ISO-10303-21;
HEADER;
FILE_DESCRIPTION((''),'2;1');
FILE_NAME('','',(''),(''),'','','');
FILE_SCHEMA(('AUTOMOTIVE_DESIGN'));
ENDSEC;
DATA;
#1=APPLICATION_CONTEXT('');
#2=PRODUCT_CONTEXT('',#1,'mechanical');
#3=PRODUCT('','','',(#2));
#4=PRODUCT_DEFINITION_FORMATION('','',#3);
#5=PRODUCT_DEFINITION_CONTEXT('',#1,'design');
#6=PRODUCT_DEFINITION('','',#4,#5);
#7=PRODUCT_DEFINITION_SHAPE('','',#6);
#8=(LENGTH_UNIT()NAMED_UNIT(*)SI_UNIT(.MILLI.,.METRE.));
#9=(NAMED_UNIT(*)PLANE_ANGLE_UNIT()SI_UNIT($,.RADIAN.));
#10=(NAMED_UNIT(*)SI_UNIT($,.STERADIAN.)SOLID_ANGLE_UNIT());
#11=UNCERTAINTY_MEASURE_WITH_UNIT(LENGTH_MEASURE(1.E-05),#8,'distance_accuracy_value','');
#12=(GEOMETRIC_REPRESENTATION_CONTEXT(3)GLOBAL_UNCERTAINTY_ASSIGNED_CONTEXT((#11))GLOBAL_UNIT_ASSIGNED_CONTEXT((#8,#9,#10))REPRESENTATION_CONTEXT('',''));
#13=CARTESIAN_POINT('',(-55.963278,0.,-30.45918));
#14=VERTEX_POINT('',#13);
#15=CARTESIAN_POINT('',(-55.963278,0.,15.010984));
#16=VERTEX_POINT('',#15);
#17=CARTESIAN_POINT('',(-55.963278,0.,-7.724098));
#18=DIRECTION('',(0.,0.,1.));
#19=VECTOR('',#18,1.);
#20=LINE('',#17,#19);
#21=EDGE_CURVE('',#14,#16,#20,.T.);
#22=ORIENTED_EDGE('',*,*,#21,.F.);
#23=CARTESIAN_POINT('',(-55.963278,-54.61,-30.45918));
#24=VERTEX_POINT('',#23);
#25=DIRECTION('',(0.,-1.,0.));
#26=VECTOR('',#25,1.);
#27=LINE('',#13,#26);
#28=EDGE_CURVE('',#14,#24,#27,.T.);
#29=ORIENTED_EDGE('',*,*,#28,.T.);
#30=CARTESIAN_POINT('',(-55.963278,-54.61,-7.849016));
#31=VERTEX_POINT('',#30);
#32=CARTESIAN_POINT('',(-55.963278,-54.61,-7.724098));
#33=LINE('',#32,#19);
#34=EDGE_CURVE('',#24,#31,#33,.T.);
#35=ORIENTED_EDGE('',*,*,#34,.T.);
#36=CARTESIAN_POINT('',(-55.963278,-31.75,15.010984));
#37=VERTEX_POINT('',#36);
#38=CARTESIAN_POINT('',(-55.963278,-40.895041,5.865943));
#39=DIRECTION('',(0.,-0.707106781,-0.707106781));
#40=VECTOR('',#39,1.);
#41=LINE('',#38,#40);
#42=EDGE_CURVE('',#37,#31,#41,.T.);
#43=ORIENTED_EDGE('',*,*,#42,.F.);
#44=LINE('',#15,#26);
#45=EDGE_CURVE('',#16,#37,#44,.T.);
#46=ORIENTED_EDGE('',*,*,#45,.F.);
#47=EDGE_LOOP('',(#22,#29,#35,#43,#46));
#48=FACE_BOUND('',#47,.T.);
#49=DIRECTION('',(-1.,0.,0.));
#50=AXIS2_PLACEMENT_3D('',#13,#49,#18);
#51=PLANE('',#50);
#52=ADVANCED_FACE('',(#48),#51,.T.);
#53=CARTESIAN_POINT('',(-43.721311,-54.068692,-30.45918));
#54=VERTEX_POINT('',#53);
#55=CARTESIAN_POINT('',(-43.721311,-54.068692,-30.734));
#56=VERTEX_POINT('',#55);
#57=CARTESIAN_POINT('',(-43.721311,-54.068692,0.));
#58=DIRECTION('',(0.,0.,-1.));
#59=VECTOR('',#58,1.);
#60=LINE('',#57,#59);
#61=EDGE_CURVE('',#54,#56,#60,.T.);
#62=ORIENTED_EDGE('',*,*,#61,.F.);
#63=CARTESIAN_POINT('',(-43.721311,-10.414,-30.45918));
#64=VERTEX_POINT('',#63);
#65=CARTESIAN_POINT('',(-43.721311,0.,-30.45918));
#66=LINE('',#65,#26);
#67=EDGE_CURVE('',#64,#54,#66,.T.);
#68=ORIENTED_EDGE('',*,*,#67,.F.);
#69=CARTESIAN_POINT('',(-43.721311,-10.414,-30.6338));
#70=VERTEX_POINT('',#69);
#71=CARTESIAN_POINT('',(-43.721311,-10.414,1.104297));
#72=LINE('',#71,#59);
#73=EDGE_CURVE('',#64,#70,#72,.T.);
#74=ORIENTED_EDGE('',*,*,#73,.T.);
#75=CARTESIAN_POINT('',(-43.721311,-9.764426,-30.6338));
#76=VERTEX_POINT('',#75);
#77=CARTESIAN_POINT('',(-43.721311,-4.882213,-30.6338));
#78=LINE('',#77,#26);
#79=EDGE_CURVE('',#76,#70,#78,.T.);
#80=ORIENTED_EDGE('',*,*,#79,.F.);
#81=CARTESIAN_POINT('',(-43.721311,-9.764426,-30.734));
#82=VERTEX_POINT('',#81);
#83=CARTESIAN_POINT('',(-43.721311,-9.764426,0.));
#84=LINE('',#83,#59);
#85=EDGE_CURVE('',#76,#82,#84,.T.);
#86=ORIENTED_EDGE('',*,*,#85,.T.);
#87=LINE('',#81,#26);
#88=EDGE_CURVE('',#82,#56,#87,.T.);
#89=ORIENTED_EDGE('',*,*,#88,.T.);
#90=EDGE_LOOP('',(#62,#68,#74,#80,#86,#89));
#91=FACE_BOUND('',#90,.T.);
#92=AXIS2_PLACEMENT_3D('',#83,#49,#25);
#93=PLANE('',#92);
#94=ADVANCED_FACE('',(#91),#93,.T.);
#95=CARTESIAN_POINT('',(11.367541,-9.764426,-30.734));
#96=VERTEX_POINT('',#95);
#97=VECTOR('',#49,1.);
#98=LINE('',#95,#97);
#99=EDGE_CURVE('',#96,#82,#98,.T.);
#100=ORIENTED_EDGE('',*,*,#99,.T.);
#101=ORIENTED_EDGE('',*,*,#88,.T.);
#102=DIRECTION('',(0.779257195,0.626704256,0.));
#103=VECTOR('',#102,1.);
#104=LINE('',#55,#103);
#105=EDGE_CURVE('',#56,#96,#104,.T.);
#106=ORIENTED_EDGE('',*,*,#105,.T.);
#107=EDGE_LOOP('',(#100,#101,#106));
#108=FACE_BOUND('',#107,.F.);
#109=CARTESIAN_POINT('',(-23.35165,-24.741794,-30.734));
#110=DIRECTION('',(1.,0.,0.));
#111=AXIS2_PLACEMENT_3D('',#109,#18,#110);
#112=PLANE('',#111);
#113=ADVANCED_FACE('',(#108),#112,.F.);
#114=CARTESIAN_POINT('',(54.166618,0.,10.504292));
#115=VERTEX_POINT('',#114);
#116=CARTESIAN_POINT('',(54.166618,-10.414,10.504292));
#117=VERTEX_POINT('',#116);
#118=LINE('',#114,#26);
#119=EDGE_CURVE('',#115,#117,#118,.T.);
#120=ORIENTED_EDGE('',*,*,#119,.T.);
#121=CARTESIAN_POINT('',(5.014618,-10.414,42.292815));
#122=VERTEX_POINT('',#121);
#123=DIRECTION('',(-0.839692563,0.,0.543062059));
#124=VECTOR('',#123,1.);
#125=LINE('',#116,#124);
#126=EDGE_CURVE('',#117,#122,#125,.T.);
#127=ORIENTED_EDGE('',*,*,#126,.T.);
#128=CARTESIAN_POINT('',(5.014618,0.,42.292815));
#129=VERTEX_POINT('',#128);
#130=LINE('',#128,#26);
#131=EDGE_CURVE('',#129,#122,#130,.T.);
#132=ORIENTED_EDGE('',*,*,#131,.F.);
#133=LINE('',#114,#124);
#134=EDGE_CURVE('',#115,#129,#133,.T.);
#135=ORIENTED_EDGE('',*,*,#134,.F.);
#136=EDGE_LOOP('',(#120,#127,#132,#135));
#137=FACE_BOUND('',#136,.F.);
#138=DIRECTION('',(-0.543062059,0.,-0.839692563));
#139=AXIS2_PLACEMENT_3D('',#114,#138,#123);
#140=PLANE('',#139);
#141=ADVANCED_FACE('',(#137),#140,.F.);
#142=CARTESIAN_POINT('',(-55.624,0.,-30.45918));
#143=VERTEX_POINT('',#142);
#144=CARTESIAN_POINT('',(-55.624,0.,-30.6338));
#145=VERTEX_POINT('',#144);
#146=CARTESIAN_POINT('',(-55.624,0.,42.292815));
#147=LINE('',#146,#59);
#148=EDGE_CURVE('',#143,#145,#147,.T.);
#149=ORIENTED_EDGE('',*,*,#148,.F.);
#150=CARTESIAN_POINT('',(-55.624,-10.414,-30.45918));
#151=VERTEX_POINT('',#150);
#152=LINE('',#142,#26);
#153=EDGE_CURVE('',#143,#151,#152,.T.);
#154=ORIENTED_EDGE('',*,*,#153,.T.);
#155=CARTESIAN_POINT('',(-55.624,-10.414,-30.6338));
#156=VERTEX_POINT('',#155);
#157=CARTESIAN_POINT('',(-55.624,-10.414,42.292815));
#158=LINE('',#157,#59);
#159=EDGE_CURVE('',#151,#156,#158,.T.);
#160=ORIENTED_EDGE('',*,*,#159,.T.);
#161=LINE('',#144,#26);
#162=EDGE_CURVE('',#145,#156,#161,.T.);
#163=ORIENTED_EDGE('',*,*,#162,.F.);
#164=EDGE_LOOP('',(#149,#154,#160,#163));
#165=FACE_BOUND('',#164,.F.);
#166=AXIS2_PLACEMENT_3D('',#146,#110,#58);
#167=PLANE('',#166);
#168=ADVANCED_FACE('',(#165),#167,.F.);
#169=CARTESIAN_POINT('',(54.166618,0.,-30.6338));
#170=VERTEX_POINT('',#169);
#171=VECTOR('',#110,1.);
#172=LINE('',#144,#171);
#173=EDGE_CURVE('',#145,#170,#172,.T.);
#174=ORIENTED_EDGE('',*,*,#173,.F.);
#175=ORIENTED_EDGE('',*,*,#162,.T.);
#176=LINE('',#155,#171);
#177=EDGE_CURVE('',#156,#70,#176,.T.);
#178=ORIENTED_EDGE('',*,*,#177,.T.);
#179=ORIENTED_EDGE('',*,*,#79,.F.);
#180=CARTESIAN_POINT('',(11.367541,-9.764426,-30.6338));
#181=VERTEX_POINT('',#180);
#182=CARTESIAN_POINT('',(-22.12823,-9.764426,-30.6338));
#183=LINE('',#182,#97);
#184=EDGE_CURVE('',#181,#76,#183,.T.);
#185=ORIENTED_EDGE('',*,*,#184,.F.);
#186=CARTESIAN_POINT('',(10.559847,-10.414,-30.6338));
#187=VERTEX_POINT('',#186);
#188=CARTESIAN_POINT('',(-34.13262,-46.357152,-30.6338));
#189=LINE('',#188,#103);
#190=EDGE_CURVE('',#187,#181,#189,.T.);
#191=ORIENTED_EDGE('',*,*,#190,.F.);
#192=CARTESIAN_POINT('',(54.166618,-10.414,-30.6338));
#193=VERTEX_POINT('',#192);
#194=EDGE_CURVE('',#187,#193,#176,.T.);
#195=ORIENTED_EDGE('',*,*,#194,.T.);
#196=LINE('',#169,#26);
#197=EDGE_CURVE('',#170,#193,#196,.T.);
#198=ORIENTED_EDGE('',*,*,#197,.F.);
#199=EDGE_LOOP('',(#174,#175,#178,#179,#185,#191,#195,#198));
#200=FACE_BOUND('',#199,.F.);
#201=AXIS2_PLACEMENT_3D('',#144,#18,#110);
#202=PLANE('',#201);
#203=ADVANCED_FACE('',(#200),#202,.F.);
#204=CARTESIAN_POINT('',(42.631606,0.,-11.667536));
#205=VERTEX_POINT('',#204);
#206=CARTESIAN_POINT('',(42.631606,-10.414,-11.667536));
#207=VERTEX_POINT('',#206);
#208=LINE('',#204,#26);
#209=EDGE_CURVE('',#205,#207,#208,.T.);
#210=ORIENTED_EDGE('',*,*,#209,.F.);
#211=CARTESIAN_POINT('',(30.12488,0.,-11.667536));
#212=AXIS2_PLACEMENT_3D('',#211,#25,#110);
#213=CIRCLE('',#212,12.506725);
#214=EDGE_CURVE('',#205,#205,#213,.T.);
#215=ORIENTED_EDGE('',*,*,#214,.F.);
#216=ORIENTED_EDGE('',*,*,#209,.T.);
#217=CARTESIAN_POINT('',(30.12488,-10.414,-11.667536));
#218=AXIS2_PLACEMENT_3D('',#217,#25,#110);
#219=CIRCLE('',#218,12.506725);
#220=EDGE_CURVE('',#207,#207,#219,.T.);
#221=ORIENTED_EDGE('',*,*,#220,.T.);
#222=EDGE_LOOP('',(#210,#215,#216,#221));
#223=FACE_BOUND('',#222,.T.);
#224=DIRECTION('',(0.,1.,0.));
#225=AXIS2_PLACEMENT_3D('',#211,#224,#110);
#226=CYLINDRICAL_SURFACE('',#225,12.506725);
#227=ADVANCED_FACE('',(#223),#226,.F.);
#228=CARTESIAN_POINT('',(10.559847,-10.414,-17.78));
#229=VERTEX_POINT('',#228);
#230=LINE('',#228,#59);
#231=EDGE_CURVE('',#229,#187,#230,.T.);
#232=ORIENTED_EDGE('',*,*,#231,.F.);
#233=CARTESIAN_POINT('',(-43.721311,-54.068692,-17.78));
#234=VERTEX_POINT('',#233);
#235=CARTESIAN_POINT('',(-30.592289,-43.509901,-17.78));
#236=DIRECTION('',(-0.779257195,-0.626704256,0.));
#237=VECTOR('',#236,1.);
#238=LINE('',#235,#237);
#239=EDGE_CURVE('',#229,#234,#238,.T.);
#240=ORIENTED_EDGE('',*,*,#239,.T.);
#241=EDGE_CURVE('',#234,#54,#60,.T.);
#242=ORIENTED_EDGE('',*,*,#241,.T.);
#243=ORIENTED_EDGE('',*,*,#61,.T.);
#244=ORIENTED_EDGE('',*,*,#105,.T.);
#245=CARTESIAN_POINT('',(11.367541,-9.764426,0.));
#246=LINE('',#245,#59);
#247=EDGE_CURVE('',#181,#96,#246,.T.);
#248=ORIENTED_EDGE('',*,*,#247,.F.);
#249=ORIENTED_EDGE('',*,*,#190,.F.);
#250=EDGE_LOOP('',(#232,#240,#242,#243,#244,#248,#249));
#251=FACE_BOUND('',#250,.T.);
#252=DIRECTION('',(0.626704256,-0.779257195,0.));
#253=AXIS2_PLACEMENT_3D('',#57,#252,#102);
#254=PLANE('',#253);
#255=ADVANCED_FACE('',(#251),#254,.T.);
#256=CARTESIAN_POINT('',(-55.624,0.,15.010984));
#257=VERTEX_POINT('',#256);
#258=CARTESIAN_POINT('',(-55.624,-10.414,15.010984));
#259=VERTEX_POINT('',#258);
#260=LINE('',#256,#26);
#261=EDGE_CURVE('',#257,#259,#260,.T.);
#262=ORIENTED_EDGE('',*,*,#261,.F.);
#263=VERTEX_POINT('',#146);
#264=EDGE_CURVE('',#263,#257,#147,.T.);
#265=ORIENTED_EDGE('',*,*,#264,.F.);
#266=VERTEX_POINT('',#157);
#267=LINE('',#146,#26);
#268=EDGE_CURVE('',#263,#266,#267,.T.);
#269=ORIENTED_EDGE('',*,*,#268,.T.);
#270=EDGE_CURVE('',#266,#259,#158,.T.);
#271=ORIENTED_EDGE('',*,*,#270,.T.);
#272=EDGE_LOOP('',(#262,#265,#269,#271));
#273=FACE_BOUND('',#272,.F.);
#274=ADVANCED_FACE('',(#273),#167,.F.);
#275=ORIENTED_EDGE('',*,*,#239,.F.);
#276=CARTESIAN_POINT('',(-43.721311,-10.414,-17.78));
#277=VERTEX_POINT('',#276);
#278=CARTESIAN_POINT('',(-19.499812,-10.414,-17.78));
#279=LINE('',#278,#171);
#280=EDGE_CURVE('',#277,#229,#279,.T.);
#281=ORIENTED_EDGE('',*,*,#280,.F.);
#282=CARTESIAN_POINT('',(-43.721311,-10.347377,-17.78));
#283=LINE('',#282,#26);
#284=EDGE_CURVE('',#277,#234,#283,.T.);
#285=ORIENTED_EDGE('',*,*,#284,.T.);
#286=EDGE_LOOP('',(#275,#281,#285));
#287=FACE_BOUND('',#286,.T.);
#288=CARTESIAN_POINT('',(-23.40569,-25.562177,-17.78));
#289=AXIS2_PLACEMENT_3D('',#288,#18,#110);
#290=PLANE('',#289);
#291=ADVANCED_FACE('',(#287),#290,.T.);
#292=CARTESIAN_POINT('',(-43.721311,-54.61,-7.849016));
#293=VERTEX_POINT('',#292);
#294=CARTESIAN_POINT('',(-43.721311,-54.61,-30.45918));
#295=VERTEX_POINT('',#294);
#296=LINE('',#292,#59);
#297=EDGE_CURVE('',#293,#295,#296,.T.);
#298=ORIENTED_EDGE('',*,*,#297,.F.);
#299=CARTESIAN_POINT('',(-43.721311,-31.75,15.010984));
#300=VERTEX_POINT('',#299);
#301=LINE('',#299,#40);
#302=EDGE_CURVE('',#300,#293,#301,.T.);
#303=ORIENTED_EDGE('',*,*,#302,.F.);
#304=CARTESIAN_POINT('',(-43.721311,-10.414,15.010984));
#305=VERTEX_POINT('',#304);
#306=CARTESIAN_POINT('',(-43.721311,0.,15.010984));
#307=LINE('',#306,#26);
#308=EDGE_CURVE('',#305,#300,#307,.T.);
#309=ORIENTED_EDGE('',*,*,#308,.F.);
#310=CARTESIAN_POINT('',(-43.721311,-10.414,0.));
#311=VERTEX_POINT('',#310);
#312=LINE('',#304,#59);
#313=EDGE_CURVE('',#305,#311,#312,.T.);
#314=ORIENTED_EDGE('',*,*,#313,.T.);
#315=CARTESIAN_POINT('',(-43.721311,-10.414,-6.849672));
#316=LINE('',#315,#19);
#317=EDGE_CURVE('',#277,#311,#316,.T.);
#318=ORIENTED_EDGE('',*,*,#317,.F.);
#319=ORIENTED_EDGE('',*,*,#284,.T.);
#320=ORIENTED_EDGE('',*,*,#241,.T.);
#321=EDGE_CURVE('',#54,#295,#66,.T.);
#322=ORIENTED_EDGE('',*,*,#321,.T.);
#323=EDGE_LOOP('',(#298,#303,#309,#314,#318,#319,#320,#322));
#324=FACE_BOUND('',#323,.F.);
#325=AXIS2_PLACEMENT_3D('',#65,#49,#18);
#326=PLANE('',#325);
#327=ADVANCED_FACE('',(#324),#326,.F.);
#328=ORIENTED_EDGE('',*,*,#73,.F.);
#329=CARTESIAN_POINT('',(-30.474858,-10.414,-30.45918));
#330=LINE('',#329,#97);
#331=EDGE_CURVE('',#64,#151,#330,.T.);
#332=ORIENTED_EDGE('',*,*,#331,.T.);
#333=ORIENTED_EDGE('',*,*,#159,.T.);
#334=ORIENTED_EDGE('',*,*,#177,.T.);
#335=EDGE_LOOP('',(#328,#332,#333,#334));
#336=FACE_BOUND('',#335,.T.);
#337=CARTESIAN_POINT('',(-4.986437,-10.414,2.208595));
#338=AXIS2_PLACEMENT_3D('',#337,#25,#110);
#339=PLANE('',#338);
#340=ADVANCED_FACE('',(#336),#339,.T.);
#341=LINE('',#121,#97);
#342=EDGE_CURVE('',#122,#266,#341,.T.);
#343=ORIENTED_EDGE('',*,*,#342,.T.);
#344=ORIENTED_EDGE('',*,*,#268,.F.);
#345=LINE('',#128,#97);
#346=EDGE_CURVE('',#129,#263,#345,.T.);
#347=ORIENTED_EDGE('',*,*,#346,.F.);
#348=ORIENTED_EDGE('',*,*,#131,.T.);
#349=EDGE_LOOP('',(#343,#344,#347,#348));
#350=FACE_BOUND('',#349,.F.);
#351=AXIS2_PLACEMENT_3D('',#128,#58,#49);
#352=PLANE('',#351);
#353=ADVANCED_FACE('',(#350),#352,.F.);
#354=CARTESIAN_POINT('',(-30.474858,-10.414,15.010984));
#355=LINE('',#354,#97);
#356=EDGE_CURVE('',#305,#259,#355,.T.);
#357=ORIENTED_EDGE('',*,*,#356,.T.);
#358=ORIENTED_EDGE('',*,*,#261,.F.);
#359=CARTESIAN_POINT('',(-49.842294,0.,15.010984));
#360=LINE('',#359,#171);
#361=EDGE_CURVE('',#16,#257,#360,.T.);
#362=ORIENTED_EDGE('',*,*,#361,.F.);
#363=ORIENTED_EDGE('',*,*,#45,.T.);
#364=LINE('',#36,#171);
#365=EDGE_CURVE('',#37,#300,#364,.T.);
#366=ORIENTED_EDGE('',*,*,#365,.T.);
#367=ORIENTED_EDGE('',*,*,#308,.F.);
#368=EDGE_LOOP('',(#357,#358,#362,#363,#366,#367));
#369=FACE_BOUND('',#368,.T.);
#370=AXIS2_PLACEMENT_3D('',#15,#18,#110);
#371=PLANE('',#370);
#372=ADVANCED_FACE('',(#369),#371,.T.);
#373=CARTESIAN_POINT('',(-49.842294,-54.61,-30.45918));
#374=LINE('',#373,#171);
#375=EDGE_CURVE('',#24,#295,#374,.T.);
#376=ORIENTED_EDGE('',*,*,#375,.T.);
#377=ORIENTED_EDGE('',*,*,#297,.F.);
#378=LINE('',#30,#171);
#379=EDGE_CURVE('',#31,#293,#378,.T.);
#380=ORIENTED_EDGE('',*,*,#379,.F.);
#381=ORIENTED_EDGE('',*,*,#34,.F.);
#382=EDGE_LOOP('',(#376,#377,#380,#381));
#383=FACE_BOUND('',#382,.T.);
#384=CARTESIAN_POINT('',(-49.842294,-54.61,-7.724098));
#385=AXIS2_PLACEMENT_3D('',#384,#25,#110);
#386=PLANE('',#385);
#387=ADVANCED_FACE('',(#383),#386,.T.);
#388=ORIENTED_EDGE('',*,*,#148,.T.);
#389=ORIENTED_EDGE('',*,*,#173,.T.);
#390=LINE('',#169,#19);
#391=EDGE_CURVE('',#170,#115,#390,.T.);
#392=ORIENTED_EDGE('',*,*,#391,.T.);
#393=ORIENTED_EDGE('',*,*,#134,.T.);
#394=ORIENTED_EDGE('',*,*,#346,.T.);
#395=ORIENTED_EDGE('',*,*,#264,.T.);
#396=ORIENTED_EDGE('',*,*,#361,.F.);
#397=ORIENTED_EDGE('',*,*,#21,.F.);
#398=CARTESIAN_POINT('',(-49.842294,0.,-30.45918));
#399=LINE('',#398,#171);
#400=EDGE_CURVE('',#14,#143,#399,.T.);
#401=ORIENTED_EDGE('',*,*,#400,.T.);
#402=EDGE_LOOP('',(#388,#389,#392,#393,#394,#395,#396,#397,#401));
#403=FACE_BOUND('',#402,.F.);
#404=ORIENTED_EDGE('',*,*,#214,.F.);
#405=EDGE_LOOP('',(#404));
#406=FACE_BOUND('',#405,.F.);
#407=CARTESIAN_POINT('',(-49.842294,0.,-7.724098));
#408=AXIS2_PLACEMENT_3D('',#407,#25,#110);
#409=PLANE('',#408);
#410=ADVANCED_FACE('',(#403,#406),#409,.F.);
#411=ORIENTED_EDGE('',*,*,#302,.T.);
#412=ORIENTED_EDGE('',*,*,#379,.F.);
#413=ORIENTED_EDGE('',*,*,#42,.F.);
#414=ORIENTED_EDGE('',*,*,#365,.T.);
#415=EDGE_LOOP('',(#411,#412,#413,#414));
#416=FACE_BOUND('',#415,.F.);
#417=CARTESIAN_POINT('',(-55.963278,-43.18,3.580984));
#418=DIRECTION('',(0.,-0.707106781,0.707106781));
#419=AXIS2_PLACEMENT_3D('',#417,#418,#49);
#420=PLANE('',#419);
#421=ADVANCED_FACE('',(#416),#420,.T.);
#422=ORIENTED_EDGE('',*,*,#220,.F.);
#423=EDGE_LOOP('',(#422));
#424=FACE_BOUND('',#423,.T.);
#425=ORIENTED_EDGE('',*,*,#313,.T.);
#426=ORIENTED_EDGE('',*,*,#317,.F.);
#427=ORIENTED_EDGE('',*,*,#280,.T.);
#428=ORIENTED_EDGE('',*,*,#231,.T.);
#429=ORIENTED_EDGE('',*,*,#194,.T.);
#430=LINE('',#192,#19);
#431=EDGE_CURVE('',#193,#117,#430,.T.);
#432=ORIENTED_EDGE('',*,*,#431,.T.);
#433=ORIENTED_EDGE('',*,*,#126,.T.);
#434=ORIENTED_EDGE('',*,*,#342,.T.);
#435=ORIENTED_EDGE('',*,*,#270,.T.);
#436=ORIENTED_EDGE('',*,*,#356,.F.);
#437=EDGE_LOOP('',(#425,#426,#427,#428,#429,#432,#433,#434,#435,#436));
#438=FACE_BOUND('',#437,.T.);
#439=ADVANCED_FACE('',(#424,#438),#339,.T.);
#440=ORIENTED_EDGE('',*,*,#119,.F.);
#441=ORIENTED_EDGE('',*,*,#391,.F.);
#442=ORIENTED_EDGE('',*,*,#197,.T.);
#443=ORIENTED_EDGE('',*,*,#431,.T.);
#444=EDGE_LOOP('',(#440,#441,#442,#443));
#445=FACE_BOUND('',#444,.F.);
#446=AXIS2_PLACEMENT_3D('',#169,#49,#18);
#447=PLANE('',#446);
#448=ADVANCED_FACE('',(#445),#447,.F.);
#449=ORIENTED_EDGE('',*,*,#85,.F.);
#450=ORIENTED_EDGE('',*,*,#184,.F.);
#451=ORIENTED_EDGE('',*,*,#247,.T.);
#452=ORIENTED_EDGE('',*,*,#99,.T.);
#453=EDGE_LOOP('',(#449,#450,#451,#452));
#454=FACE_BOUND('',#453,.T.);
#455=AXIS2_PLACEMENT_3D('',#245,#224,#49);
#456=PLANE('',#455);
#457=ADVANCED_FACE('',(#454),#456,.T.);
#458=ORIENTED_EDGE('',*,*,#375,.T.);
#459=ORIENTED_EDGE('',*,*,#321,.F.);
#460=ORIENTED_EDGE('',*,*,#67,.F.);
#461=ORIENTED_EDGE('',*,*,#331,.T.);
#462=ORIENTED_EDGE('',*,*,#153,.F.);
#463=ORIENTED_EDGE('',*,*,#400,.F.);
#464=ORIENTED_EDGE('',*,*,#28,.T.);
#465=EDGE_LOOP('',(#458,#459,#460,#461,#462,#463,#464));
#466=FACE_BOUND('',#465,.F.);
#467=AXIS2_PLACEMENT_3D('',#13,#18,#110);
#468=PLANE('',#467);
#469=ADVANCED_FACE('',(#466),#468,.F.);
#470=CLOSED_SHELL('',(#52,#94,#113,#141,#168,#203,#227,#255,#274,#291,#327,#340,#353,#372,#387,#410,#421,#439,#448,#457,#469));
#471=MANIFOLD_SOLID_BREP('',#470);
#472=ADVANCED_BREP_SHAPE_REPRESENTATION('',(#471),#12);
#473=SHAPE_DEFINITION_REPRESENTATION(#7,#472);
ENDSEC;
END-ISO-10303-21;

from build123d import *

# Parameters (mm, degrees)
F0_R      = 12.5067254218
F1_DEPTH  = 10.414
F2_W      = 12.2419670224
F2_H      = 45.4701641575
F3_DEPTH  = 54.61
F4_SIZE   = 22.86
F6_DEPTH  = 30.734
F8_DEPTH  = 17.78
F9_W      = 56.2547529116
F9_H      = 22.1521309577
F10_DEPTH = 10.414


# Not quite as in the source:
# - a feature names something its author has since deleted; it is built from what else it names


with BuildPart() as f1:
    # F0 (on Front) → F1 (new body)
    with BuildSketch(Plane.XZ):
        Polygon((5.0146179641, 42.2928149286), (-55.6240000051, 42.2928149286), (-55.6240000051, -30.6337999585), (54.1666180116, -30.6337999585), (54.1666180116, 10.5042919132), align=None)
        with Locations((30.1248802542, -11.6675363407)):
            Circle(F0_R, mode=Mode.SUBTRACT)
    extrude(amount=F1_DEPTH)

    # F2 (on Front) → F3 (join)
    with BuildSketch(Plane.XZ):
        with Locations((-49.8422943056, -7.7240983956)):
            Rectangle(F2_W, F2_H)
    extrude(amount=F3_DEPTH)

    # F4
    f4_edges = [f1.edges().sort_by_distance(p)[0] for p in [
        (-49.842294, -54.61, 15.010984),
    ]]
    chamfer(f4_edges, length=F4_SIZE)

    # F5 (on Top) → F6 (join)
    with BuildSketch(Plane.XY):
        Polygon((11.3675408065, -9.7644263878), (-43.7213107944, -9.7644263878), (-43.7213107944, -54.0686920285), align=None)
    extrude(amount=-F6_DEPTH)

    # F7 (on Top) → F8 (cut)
    with BuildSketch(Plane.XY):
        Polygon((11.3675408065, -10.3473765776), (-43.7213107944, -10.3473765776), (-43.7213107944, -55.2345886827), align=None)
    extrude(amount=-F8_DEPTH, mode=Mode.SUBTRACT)

    # F9 (on Front) → F10 (join)
    with BuildSketch(Plane.XZ):
        with Locations((-15.5939343385, -6.8496719468)):
            Rectangle(F9_W, F9_H)
    extrude(amount=F10_DEPTH)


solid = f1.part
